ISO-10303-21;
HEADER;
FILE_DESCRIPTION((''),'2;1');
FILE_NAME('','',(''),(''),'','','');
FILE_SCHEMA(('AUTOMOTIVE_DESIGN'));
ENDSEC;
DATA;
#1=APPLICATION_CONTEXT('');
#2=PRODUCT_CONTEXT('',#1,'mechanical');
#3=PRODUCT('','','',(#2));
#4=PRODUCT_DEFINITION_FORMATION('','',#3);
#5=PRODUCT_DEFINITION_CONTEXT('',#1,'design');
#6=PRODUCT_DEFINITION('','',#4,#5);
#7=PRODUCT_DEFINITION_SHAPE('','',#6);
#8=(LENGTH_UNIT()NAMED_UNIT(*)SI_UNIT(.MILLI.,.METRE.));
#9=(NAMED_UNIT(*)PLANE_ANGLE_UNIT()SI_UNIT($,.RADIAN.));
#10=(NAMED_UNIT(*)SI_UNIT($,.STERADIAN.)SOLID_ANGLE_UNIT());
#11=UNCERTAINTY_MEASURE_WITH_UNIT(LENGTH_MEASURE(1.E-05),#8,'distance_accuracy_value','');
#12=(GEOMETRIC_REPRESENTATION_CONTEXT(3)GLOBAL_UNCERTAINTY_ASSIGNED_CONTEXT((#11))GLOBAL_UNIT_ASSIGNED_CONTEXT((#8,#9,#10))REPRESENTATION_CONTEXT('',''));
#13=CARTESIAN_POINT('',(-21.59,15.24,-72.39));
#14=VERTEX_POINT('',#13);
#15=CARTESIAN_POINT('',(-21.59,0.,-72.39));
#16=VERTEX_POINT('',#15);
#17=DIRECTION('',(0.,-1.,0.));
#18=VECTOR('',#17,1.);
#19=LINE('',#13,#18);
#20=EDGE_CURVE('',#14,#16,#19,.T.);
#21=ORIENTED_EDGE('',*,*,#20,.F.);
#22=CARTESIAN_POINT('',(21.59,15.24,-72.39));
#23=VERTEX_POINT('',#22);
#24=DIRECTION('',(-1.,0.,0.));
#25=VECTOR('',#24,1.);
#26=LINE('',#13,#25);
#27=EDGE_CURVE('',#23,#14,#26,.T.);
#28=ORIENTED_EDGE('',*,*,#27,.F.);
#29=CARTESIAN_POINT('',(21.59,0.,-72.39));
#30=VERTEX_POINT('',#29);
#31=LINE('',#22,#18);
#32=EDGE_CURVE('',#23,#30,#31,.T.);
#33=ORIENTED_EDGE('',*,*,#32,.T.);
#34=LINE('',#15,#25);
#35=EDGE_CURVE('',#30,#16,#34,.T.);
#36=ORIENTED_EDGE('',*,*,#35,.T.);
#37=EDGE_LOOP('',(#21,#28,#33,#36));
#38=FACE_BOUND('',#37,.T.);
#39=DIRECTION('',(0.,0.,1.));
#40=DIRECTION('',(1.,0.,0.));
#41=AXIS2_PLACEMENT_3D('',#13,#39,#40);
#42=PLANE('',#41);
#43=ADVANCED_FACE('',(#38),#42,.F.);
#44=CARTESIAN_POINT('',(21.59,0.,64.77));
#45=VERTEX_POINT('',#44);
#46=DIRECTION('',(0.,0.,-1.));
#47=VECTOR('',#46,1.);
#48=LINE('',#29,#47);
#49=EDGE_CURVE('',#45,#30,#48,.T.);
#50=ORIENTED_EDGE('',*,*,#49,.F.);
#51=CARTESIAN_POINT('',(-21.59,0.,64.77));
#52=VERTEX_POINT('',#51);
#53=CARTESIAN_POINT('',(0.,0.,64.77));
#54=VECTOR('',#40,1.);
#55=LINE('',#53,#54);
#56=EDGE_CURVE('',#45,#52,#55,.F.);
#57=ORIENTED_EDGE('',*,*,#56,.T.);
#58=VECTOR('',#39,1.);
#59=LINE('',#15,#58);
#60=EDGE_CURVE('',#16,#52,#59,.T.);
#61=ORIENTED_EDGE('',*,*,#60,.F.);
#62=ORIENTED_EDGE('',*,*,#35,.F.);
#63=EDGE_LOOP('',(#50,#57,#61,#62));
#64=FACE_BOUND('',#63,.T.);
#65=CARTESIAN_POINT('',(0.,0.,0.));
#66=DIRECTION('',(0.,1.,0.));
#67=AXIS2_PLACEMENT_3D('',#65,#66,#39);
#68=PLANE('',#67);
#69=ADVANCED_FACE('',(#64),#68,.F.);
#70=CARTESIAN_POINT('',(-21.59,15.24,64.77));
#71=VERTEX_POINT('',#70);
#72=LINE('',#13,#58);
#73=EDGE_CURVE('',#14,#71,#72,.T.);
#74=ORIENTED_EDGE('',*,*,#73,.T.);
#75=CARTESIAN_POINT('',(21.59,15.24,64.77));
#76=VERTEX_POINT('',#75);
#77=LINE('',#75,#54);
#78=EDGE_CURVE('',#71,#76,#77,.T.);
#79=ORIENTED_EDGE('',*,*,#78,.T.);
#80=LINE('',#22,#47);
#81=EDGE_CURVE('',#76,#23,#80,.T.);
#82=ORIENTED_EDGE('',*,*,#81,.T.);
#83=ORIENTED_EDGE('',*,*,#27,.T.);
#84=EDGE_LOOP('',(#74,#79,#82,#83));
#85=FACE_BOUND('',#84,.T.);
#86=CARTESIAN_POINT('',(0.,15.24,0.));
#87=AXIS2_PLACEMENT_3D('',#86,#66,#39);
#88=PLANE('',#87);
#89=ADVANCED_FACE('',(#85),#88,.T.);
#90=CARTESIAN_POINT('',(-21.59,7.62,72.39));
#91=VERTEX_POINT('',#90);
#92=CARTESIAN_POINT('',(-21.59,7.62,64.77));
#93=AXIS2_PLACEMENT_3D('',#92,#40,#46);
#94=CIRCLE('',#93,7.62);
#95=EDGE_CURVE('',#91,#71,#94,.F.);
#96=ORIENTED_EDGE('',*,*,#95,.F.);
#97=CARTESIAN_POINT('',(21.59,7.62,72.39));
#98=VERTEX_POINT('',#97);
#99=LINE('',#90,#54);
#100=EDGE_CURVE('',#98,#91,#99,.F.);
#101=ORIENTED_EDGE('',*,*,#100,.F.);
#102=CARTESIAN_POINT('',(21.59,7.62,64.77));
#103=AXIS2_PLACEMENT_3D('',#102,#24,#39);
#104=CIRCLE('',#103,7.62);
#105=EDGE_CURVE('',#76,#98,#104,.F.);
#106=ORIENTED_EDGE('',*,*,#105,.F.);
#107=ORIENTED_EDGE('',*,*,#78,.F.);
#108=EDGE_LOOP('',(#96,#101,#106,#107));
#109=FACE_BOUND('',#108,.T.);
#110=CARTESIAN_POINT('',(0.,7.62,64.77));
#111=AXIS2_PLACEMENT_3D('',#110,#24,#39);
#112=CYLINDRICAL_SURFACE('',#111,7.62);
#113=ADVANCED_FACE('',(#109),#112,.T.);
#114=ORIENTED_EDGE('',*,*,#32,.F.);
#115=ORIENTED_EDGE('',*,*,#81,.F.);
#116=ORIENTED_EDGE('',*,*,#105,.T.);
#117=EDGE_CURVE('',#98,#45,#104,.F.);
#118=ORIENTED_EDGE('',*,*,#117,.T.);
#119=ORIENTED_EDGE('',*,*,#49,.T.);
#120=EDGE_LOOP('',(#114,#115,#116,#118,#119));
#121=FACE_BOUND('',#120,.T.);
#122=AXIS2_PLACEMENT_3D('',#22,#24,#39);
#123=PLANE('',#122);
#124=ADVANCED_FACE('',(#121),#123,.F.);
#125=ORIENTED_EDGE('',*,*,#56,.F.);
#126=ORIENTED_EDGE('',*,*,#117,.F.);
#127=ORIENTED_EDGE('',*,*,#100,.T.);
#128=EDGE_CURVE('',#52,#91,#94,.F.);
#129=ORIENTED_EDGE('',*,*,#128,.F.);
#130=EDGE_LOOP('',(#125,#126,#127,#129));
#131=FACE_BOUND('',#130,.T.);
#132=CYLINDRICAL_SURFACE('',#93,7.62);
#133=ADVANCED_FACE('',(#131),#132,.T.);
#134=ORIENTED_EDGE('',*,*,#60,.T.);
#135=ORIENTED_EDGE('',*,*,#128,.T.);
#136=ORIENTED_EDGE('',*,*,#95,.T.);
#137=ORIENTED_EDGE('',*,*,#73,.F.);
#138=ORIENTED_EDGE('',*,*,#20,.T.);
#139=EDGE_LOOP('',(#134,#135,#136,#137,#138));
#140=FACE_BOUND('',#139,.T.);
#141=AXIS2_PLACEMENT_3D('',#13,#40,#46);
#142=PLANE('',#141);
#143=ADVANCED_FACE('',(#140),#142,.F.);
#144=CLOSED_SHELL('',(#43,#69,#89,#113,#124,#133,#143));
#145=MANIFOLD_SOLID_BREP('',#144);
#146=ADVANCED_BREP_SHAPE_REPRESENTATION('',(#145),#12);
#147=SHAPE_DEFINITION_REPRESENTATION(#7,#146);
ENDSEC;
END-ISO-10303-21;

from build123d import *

# Parameters (mm, degrees)
SKETCH1_W           = 43.18
SKETCH1_H           = 144.78
BOSS_EXTRUDE1_DEPTH = 15.24
FILLET1_R           = 7.62


with BuildPart() as part:
    # Sketch1 → Boss-Extrude1 (new body)
    with BuildSketch(Plane(origin=(0, 0, 0), x_dir=(1, 0, 0), z_dir=(0, 1, 0))):
        Rectangle(SKETCH1_W, SKETCH1_H)
    extrude(amount=BOSS_EXTRUDE1_DEPTH)

    # Fillet1
    fillet1_edges = [part.edges().sort_by_distance(p)[0] for p in [
        (0, 0, 72.39),
        (0, 15.24, 72.39),
    ]]
    fillet(fillet1_edges, radius=FILLET1_R - 0.0001)  # a hair under: the kernel refuses the full size


solid = part.part
